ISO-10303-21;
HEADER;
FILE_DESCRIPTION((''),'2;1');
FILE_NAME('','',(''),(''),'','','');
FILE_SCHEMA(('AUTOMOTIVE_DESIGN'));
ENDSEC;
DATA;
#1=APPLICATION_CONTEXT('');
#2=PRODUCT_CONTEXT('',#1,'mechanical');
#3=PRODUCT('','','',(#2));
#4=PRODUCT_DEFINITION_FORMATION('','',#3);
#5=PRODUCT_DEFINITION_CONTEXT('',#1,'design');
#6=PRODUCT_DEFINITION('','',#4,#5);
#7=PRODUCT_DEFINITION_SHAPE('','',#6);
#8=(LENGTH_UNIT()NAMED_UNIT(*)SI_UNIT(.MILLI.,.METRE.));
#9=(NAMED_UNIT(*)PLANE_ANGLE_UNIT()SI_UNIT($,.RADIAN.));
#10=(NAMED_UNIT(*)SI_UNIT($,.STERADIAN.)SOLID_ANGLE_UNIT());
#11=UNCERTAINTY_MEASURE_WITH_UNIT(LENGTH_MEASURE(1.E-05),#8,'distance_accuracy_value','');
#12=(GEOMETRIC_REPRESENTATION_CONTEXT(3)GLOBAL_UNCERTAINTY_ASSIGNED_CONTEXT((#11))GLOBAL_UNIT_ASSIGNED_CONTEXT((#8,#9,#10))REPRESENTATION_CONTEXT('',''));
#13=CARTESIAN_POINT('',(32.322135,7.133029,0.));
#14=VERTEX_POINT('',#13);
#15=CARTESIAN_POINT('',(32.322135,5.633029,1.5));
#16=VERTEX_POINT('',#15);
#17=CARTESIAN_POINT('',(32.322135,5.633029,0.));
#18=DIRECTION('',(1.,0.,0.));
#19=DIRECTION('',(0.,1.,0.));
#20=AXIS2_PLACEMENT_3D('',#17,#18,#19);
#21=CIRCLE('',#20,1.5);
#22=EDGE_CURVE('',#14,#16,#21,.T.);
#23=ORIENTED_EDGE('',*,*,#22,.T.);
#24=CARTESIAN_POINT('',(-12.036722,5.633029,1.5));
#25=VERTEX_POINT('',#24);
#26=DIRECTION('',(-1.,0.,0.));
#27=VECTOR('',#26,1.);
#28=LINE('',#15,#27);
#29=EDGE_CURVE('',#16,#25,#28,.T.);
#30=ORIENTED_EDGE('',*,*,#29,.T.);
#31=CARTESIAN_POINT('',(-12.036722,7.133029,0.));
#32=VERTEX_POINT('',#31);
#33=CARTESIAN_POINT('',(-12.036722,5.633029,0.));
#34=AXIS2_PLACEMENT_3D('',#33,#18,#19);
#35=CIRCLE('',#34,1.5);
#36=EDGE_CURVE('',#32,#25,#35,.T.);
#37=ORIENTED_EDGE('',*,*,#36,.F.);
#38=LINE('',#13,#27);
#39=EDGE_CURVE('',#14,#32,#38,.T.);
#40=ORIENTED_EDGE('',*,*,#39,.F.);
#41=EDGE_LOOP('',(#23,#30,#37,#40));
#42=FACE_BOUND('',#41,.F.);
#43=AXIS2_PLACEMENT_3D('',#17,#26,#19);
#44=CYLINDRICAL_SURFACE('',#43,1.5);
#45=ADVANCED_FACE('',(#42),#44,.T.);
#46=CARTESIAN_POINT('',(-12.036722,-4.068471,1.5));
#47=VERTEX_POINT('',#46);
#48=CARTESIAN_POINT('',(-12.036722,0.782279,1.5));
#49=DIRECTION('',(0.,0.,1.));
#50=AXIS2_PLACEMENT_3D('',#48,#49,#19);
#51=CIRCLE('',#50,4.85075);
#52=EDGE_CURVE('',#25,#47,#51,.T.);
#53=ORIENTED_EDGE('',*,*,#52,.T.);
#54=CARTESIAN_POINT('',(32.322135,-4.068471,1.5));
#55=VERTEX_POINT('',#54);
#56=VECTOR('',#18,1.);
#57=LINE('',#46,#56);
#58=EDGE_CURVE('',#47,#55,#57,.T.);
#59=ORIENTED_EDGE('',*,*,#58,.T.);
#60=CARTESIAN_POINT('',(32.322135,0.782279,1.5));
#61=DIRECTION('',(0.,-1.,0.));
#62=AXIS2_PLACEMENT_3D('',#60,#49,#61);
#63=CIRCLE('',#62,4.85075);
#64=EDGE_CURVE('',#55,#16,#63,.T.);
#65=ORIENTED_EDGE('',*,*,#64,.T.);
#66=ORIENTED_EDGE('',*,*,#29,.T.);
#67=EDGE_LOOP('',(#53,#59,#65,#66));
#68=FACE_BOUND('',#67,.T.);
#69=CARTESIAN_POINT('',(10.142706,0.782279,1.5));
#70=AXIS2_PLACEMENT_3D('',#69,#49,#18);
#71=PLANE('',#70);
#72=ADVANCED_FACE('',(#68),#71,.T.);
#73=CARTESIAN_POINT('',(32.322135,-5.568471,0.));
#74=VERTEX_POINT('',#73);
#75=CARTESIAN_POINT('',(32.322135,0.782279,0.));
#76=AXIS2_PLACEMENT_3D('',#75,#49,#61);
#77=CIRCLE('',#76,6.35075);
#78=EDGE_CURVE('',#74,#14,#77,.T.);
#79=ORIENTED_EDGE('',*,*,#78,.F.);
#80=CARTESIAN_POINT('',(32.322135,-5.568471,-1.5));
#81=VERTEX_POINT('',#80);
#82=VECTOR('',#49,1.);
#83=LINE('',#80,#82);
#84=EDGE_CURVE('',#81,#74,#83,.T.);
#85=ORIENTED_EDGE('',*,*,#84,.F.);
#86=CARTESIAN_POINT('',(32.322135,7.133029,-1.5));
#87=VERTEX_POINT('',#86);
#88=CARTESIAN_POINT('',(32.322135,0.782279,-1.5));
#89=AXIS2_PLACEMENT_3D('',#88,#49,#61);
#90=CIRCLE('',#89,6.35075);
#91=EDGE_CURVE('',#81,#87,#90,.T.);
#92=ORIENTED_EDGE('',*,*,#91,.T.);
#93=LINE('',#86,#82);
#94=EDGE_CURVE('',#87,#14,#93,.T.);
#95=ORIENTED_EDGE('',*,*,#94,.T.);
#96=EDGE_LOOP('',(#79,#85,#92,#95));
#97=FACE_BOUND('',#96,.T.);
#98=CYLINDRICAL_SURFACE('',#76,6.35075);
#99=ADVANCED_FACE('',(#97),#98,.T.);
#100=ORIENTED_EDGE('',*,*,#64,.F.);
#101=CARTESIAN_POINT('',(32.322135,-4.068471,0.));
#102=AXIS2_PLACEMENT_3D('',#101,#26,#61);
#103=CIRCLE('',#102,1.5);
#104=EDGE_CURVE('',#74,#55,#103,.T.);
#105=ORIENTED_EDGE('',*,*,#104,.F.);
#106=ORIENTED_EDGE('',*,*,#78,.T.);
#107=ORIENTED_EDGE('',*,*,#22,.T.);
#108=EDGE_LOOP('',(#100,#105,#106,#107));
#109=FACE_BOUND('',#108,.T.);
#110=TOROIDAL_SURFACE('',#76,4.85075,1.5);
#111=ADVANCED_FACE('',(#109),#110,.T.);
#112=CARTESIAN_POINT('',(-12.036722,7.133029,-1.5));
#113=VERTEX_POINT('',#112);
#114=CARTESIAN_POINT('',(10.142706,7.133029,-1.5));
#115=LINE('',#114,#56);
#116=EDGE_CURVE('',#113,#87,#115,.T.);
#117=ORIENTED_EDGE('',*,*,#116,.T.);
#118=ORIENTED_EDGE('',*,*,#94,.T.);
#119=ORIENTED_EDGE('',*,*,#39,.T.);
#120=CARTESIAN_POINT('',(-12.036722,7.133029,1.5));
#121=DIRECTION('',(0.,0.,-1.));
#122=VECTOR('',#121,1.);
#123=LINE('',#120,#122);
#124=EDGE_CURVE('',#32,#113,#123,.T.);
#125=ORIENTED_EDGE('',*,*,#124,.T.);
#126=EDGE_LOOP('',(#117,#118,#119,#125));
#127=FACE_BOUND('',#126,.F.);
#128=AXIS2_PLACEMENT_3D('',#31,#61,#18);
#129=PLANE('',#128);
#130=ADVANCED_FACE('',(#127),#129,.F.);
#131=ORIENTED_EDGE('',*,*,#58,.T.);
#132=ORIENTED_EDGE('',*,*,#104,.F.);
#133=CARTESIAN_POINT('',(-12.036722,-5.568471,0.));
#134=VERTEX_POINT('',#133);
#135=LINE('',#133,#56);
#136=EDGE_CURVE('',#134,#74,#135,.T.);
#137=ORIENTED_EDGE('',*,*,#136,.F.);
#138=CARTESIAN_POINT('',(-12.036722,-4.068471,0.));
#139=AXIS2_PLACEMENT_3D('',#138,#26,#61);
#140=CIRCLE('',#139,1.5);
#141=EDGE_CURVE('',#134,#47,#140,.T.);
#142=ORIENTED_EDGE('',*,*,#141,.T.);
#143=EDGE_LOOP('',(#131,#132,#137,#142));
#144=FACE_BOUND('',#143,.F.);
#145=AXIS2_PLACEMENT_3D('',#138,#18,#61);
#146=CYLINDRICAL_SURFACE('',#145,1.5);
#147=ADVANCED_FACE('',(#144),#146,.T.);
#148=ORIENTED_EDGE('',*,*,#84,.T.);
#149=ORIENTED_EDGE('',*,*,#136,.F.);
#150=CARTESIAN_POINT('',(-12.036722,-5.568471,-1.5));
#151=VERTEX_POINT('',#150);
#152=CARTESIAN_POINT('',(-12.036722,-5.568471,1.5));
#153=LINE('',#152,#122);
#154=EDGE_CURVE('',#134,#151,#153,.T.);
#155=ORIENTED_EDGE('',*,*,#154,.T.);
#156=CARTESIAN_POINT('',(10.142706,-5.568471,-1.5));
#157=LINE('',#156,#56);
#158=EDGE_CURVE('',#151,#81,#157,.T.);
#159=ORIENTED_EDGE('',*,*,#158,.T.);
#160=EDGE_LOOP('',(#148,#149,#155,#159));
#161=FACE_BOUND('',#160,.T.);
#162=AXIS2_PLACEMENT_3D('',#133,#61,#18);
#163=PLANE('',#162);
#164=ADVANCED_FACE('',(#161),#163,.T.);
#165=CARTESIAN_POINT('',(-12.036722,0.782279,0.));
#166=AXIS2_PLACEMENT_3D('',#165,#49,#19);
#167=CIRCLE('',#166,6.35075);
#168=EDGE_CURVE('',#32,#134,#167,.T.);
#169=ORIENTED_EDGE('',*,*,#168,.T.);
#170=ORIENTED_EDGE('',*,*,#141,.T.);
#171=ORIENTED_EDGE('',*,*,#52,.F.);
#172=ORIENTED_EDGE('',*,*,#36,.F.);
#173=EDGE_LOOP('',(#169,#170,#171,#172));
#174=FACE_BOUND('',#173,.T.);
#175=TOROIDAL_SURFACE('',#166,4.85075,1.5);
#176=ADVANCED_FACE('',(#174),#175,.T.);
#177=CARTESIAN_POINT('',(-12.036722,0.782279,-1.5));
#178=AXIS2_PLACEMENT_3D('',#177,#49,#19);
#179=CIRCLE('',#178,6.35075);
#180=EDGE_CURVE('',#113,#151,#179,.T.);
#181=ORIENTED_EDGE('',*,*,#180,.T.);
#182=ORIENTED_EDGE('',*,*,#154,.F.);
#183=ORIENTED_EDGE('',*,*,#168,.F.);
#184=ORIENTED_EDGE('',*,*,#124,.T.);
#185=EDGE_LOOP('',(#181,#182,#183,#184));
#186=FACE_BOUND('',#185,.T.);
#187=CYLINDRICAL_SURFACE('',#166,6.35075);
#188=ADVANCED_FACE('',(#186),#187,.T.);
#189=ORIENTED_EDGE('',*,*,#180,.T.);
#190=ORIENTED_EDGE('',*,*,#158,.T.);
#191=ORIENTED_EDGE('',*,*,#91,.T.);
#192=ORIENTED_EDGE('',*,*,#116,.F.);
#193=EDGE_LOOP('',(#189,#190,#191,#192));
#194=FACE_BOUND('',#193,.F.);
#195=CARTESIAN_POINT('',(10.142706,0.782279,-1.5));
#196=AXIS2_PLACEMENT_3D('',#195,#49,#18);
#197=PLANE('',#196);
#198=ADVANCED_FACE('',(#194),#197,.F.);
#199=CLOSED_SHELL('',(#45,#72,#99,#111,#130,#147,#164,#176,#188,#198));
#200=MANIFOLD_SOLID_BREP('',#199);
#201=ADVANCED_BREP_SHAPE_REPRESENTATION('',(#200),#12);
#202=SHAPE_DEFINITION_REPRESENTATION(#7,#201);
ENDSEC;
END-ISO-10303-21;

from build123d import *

# Parameters (mm, degrees)
F0_W     = 44.358856976
F0_H     = 12.7014997415
F1_DEPTH = 1.5
F2_R     = 1.5


# Not quite as in the source:
# - a feature names something its author has since deleted; it is built from what else it names


with BuildPart() as f1:
    # F0 (on Top) → F1 (new body, symmetric)
    with BuildSketch(Plane.XY):
        with Locations((10.1427063346, 0.782278832)):
            Rectangle(F0_W, F0_H)
        with BuildLine():
            ThreePointArc((-12.0367221534, 7.1330287028), (-18.3874720242, 0.782278832), (-12.0367221534, -5.5684710387))
            Line((-12.0367221534, -5.5684710387), (-12.0367221534, 7.1330287028))
        make_face()
        with BuildLine():
            Line((32.3221348226, 7.1330287028), (32.3221348226, -5.5684710387))
            ThreePointArc((32.3221348226, -5.5684710387), (38.6728846934, 0.782278832), (32.3221348226, 7.1330287028))
        make_face()
    extrude(amount=F1_DEPTH, both=True)

    # F2
    f2_edges = [f1.edges().sort_by_distance(p)[0] for p in [
        (10.142706, -5.568471, 1.5),
        (10.142706, 7.133029, 1.5),
        (38.672885, 0.782279, 1.5),
    ]]
    fillet(f2_edges, radius=F2_R)


solid = f1.part
